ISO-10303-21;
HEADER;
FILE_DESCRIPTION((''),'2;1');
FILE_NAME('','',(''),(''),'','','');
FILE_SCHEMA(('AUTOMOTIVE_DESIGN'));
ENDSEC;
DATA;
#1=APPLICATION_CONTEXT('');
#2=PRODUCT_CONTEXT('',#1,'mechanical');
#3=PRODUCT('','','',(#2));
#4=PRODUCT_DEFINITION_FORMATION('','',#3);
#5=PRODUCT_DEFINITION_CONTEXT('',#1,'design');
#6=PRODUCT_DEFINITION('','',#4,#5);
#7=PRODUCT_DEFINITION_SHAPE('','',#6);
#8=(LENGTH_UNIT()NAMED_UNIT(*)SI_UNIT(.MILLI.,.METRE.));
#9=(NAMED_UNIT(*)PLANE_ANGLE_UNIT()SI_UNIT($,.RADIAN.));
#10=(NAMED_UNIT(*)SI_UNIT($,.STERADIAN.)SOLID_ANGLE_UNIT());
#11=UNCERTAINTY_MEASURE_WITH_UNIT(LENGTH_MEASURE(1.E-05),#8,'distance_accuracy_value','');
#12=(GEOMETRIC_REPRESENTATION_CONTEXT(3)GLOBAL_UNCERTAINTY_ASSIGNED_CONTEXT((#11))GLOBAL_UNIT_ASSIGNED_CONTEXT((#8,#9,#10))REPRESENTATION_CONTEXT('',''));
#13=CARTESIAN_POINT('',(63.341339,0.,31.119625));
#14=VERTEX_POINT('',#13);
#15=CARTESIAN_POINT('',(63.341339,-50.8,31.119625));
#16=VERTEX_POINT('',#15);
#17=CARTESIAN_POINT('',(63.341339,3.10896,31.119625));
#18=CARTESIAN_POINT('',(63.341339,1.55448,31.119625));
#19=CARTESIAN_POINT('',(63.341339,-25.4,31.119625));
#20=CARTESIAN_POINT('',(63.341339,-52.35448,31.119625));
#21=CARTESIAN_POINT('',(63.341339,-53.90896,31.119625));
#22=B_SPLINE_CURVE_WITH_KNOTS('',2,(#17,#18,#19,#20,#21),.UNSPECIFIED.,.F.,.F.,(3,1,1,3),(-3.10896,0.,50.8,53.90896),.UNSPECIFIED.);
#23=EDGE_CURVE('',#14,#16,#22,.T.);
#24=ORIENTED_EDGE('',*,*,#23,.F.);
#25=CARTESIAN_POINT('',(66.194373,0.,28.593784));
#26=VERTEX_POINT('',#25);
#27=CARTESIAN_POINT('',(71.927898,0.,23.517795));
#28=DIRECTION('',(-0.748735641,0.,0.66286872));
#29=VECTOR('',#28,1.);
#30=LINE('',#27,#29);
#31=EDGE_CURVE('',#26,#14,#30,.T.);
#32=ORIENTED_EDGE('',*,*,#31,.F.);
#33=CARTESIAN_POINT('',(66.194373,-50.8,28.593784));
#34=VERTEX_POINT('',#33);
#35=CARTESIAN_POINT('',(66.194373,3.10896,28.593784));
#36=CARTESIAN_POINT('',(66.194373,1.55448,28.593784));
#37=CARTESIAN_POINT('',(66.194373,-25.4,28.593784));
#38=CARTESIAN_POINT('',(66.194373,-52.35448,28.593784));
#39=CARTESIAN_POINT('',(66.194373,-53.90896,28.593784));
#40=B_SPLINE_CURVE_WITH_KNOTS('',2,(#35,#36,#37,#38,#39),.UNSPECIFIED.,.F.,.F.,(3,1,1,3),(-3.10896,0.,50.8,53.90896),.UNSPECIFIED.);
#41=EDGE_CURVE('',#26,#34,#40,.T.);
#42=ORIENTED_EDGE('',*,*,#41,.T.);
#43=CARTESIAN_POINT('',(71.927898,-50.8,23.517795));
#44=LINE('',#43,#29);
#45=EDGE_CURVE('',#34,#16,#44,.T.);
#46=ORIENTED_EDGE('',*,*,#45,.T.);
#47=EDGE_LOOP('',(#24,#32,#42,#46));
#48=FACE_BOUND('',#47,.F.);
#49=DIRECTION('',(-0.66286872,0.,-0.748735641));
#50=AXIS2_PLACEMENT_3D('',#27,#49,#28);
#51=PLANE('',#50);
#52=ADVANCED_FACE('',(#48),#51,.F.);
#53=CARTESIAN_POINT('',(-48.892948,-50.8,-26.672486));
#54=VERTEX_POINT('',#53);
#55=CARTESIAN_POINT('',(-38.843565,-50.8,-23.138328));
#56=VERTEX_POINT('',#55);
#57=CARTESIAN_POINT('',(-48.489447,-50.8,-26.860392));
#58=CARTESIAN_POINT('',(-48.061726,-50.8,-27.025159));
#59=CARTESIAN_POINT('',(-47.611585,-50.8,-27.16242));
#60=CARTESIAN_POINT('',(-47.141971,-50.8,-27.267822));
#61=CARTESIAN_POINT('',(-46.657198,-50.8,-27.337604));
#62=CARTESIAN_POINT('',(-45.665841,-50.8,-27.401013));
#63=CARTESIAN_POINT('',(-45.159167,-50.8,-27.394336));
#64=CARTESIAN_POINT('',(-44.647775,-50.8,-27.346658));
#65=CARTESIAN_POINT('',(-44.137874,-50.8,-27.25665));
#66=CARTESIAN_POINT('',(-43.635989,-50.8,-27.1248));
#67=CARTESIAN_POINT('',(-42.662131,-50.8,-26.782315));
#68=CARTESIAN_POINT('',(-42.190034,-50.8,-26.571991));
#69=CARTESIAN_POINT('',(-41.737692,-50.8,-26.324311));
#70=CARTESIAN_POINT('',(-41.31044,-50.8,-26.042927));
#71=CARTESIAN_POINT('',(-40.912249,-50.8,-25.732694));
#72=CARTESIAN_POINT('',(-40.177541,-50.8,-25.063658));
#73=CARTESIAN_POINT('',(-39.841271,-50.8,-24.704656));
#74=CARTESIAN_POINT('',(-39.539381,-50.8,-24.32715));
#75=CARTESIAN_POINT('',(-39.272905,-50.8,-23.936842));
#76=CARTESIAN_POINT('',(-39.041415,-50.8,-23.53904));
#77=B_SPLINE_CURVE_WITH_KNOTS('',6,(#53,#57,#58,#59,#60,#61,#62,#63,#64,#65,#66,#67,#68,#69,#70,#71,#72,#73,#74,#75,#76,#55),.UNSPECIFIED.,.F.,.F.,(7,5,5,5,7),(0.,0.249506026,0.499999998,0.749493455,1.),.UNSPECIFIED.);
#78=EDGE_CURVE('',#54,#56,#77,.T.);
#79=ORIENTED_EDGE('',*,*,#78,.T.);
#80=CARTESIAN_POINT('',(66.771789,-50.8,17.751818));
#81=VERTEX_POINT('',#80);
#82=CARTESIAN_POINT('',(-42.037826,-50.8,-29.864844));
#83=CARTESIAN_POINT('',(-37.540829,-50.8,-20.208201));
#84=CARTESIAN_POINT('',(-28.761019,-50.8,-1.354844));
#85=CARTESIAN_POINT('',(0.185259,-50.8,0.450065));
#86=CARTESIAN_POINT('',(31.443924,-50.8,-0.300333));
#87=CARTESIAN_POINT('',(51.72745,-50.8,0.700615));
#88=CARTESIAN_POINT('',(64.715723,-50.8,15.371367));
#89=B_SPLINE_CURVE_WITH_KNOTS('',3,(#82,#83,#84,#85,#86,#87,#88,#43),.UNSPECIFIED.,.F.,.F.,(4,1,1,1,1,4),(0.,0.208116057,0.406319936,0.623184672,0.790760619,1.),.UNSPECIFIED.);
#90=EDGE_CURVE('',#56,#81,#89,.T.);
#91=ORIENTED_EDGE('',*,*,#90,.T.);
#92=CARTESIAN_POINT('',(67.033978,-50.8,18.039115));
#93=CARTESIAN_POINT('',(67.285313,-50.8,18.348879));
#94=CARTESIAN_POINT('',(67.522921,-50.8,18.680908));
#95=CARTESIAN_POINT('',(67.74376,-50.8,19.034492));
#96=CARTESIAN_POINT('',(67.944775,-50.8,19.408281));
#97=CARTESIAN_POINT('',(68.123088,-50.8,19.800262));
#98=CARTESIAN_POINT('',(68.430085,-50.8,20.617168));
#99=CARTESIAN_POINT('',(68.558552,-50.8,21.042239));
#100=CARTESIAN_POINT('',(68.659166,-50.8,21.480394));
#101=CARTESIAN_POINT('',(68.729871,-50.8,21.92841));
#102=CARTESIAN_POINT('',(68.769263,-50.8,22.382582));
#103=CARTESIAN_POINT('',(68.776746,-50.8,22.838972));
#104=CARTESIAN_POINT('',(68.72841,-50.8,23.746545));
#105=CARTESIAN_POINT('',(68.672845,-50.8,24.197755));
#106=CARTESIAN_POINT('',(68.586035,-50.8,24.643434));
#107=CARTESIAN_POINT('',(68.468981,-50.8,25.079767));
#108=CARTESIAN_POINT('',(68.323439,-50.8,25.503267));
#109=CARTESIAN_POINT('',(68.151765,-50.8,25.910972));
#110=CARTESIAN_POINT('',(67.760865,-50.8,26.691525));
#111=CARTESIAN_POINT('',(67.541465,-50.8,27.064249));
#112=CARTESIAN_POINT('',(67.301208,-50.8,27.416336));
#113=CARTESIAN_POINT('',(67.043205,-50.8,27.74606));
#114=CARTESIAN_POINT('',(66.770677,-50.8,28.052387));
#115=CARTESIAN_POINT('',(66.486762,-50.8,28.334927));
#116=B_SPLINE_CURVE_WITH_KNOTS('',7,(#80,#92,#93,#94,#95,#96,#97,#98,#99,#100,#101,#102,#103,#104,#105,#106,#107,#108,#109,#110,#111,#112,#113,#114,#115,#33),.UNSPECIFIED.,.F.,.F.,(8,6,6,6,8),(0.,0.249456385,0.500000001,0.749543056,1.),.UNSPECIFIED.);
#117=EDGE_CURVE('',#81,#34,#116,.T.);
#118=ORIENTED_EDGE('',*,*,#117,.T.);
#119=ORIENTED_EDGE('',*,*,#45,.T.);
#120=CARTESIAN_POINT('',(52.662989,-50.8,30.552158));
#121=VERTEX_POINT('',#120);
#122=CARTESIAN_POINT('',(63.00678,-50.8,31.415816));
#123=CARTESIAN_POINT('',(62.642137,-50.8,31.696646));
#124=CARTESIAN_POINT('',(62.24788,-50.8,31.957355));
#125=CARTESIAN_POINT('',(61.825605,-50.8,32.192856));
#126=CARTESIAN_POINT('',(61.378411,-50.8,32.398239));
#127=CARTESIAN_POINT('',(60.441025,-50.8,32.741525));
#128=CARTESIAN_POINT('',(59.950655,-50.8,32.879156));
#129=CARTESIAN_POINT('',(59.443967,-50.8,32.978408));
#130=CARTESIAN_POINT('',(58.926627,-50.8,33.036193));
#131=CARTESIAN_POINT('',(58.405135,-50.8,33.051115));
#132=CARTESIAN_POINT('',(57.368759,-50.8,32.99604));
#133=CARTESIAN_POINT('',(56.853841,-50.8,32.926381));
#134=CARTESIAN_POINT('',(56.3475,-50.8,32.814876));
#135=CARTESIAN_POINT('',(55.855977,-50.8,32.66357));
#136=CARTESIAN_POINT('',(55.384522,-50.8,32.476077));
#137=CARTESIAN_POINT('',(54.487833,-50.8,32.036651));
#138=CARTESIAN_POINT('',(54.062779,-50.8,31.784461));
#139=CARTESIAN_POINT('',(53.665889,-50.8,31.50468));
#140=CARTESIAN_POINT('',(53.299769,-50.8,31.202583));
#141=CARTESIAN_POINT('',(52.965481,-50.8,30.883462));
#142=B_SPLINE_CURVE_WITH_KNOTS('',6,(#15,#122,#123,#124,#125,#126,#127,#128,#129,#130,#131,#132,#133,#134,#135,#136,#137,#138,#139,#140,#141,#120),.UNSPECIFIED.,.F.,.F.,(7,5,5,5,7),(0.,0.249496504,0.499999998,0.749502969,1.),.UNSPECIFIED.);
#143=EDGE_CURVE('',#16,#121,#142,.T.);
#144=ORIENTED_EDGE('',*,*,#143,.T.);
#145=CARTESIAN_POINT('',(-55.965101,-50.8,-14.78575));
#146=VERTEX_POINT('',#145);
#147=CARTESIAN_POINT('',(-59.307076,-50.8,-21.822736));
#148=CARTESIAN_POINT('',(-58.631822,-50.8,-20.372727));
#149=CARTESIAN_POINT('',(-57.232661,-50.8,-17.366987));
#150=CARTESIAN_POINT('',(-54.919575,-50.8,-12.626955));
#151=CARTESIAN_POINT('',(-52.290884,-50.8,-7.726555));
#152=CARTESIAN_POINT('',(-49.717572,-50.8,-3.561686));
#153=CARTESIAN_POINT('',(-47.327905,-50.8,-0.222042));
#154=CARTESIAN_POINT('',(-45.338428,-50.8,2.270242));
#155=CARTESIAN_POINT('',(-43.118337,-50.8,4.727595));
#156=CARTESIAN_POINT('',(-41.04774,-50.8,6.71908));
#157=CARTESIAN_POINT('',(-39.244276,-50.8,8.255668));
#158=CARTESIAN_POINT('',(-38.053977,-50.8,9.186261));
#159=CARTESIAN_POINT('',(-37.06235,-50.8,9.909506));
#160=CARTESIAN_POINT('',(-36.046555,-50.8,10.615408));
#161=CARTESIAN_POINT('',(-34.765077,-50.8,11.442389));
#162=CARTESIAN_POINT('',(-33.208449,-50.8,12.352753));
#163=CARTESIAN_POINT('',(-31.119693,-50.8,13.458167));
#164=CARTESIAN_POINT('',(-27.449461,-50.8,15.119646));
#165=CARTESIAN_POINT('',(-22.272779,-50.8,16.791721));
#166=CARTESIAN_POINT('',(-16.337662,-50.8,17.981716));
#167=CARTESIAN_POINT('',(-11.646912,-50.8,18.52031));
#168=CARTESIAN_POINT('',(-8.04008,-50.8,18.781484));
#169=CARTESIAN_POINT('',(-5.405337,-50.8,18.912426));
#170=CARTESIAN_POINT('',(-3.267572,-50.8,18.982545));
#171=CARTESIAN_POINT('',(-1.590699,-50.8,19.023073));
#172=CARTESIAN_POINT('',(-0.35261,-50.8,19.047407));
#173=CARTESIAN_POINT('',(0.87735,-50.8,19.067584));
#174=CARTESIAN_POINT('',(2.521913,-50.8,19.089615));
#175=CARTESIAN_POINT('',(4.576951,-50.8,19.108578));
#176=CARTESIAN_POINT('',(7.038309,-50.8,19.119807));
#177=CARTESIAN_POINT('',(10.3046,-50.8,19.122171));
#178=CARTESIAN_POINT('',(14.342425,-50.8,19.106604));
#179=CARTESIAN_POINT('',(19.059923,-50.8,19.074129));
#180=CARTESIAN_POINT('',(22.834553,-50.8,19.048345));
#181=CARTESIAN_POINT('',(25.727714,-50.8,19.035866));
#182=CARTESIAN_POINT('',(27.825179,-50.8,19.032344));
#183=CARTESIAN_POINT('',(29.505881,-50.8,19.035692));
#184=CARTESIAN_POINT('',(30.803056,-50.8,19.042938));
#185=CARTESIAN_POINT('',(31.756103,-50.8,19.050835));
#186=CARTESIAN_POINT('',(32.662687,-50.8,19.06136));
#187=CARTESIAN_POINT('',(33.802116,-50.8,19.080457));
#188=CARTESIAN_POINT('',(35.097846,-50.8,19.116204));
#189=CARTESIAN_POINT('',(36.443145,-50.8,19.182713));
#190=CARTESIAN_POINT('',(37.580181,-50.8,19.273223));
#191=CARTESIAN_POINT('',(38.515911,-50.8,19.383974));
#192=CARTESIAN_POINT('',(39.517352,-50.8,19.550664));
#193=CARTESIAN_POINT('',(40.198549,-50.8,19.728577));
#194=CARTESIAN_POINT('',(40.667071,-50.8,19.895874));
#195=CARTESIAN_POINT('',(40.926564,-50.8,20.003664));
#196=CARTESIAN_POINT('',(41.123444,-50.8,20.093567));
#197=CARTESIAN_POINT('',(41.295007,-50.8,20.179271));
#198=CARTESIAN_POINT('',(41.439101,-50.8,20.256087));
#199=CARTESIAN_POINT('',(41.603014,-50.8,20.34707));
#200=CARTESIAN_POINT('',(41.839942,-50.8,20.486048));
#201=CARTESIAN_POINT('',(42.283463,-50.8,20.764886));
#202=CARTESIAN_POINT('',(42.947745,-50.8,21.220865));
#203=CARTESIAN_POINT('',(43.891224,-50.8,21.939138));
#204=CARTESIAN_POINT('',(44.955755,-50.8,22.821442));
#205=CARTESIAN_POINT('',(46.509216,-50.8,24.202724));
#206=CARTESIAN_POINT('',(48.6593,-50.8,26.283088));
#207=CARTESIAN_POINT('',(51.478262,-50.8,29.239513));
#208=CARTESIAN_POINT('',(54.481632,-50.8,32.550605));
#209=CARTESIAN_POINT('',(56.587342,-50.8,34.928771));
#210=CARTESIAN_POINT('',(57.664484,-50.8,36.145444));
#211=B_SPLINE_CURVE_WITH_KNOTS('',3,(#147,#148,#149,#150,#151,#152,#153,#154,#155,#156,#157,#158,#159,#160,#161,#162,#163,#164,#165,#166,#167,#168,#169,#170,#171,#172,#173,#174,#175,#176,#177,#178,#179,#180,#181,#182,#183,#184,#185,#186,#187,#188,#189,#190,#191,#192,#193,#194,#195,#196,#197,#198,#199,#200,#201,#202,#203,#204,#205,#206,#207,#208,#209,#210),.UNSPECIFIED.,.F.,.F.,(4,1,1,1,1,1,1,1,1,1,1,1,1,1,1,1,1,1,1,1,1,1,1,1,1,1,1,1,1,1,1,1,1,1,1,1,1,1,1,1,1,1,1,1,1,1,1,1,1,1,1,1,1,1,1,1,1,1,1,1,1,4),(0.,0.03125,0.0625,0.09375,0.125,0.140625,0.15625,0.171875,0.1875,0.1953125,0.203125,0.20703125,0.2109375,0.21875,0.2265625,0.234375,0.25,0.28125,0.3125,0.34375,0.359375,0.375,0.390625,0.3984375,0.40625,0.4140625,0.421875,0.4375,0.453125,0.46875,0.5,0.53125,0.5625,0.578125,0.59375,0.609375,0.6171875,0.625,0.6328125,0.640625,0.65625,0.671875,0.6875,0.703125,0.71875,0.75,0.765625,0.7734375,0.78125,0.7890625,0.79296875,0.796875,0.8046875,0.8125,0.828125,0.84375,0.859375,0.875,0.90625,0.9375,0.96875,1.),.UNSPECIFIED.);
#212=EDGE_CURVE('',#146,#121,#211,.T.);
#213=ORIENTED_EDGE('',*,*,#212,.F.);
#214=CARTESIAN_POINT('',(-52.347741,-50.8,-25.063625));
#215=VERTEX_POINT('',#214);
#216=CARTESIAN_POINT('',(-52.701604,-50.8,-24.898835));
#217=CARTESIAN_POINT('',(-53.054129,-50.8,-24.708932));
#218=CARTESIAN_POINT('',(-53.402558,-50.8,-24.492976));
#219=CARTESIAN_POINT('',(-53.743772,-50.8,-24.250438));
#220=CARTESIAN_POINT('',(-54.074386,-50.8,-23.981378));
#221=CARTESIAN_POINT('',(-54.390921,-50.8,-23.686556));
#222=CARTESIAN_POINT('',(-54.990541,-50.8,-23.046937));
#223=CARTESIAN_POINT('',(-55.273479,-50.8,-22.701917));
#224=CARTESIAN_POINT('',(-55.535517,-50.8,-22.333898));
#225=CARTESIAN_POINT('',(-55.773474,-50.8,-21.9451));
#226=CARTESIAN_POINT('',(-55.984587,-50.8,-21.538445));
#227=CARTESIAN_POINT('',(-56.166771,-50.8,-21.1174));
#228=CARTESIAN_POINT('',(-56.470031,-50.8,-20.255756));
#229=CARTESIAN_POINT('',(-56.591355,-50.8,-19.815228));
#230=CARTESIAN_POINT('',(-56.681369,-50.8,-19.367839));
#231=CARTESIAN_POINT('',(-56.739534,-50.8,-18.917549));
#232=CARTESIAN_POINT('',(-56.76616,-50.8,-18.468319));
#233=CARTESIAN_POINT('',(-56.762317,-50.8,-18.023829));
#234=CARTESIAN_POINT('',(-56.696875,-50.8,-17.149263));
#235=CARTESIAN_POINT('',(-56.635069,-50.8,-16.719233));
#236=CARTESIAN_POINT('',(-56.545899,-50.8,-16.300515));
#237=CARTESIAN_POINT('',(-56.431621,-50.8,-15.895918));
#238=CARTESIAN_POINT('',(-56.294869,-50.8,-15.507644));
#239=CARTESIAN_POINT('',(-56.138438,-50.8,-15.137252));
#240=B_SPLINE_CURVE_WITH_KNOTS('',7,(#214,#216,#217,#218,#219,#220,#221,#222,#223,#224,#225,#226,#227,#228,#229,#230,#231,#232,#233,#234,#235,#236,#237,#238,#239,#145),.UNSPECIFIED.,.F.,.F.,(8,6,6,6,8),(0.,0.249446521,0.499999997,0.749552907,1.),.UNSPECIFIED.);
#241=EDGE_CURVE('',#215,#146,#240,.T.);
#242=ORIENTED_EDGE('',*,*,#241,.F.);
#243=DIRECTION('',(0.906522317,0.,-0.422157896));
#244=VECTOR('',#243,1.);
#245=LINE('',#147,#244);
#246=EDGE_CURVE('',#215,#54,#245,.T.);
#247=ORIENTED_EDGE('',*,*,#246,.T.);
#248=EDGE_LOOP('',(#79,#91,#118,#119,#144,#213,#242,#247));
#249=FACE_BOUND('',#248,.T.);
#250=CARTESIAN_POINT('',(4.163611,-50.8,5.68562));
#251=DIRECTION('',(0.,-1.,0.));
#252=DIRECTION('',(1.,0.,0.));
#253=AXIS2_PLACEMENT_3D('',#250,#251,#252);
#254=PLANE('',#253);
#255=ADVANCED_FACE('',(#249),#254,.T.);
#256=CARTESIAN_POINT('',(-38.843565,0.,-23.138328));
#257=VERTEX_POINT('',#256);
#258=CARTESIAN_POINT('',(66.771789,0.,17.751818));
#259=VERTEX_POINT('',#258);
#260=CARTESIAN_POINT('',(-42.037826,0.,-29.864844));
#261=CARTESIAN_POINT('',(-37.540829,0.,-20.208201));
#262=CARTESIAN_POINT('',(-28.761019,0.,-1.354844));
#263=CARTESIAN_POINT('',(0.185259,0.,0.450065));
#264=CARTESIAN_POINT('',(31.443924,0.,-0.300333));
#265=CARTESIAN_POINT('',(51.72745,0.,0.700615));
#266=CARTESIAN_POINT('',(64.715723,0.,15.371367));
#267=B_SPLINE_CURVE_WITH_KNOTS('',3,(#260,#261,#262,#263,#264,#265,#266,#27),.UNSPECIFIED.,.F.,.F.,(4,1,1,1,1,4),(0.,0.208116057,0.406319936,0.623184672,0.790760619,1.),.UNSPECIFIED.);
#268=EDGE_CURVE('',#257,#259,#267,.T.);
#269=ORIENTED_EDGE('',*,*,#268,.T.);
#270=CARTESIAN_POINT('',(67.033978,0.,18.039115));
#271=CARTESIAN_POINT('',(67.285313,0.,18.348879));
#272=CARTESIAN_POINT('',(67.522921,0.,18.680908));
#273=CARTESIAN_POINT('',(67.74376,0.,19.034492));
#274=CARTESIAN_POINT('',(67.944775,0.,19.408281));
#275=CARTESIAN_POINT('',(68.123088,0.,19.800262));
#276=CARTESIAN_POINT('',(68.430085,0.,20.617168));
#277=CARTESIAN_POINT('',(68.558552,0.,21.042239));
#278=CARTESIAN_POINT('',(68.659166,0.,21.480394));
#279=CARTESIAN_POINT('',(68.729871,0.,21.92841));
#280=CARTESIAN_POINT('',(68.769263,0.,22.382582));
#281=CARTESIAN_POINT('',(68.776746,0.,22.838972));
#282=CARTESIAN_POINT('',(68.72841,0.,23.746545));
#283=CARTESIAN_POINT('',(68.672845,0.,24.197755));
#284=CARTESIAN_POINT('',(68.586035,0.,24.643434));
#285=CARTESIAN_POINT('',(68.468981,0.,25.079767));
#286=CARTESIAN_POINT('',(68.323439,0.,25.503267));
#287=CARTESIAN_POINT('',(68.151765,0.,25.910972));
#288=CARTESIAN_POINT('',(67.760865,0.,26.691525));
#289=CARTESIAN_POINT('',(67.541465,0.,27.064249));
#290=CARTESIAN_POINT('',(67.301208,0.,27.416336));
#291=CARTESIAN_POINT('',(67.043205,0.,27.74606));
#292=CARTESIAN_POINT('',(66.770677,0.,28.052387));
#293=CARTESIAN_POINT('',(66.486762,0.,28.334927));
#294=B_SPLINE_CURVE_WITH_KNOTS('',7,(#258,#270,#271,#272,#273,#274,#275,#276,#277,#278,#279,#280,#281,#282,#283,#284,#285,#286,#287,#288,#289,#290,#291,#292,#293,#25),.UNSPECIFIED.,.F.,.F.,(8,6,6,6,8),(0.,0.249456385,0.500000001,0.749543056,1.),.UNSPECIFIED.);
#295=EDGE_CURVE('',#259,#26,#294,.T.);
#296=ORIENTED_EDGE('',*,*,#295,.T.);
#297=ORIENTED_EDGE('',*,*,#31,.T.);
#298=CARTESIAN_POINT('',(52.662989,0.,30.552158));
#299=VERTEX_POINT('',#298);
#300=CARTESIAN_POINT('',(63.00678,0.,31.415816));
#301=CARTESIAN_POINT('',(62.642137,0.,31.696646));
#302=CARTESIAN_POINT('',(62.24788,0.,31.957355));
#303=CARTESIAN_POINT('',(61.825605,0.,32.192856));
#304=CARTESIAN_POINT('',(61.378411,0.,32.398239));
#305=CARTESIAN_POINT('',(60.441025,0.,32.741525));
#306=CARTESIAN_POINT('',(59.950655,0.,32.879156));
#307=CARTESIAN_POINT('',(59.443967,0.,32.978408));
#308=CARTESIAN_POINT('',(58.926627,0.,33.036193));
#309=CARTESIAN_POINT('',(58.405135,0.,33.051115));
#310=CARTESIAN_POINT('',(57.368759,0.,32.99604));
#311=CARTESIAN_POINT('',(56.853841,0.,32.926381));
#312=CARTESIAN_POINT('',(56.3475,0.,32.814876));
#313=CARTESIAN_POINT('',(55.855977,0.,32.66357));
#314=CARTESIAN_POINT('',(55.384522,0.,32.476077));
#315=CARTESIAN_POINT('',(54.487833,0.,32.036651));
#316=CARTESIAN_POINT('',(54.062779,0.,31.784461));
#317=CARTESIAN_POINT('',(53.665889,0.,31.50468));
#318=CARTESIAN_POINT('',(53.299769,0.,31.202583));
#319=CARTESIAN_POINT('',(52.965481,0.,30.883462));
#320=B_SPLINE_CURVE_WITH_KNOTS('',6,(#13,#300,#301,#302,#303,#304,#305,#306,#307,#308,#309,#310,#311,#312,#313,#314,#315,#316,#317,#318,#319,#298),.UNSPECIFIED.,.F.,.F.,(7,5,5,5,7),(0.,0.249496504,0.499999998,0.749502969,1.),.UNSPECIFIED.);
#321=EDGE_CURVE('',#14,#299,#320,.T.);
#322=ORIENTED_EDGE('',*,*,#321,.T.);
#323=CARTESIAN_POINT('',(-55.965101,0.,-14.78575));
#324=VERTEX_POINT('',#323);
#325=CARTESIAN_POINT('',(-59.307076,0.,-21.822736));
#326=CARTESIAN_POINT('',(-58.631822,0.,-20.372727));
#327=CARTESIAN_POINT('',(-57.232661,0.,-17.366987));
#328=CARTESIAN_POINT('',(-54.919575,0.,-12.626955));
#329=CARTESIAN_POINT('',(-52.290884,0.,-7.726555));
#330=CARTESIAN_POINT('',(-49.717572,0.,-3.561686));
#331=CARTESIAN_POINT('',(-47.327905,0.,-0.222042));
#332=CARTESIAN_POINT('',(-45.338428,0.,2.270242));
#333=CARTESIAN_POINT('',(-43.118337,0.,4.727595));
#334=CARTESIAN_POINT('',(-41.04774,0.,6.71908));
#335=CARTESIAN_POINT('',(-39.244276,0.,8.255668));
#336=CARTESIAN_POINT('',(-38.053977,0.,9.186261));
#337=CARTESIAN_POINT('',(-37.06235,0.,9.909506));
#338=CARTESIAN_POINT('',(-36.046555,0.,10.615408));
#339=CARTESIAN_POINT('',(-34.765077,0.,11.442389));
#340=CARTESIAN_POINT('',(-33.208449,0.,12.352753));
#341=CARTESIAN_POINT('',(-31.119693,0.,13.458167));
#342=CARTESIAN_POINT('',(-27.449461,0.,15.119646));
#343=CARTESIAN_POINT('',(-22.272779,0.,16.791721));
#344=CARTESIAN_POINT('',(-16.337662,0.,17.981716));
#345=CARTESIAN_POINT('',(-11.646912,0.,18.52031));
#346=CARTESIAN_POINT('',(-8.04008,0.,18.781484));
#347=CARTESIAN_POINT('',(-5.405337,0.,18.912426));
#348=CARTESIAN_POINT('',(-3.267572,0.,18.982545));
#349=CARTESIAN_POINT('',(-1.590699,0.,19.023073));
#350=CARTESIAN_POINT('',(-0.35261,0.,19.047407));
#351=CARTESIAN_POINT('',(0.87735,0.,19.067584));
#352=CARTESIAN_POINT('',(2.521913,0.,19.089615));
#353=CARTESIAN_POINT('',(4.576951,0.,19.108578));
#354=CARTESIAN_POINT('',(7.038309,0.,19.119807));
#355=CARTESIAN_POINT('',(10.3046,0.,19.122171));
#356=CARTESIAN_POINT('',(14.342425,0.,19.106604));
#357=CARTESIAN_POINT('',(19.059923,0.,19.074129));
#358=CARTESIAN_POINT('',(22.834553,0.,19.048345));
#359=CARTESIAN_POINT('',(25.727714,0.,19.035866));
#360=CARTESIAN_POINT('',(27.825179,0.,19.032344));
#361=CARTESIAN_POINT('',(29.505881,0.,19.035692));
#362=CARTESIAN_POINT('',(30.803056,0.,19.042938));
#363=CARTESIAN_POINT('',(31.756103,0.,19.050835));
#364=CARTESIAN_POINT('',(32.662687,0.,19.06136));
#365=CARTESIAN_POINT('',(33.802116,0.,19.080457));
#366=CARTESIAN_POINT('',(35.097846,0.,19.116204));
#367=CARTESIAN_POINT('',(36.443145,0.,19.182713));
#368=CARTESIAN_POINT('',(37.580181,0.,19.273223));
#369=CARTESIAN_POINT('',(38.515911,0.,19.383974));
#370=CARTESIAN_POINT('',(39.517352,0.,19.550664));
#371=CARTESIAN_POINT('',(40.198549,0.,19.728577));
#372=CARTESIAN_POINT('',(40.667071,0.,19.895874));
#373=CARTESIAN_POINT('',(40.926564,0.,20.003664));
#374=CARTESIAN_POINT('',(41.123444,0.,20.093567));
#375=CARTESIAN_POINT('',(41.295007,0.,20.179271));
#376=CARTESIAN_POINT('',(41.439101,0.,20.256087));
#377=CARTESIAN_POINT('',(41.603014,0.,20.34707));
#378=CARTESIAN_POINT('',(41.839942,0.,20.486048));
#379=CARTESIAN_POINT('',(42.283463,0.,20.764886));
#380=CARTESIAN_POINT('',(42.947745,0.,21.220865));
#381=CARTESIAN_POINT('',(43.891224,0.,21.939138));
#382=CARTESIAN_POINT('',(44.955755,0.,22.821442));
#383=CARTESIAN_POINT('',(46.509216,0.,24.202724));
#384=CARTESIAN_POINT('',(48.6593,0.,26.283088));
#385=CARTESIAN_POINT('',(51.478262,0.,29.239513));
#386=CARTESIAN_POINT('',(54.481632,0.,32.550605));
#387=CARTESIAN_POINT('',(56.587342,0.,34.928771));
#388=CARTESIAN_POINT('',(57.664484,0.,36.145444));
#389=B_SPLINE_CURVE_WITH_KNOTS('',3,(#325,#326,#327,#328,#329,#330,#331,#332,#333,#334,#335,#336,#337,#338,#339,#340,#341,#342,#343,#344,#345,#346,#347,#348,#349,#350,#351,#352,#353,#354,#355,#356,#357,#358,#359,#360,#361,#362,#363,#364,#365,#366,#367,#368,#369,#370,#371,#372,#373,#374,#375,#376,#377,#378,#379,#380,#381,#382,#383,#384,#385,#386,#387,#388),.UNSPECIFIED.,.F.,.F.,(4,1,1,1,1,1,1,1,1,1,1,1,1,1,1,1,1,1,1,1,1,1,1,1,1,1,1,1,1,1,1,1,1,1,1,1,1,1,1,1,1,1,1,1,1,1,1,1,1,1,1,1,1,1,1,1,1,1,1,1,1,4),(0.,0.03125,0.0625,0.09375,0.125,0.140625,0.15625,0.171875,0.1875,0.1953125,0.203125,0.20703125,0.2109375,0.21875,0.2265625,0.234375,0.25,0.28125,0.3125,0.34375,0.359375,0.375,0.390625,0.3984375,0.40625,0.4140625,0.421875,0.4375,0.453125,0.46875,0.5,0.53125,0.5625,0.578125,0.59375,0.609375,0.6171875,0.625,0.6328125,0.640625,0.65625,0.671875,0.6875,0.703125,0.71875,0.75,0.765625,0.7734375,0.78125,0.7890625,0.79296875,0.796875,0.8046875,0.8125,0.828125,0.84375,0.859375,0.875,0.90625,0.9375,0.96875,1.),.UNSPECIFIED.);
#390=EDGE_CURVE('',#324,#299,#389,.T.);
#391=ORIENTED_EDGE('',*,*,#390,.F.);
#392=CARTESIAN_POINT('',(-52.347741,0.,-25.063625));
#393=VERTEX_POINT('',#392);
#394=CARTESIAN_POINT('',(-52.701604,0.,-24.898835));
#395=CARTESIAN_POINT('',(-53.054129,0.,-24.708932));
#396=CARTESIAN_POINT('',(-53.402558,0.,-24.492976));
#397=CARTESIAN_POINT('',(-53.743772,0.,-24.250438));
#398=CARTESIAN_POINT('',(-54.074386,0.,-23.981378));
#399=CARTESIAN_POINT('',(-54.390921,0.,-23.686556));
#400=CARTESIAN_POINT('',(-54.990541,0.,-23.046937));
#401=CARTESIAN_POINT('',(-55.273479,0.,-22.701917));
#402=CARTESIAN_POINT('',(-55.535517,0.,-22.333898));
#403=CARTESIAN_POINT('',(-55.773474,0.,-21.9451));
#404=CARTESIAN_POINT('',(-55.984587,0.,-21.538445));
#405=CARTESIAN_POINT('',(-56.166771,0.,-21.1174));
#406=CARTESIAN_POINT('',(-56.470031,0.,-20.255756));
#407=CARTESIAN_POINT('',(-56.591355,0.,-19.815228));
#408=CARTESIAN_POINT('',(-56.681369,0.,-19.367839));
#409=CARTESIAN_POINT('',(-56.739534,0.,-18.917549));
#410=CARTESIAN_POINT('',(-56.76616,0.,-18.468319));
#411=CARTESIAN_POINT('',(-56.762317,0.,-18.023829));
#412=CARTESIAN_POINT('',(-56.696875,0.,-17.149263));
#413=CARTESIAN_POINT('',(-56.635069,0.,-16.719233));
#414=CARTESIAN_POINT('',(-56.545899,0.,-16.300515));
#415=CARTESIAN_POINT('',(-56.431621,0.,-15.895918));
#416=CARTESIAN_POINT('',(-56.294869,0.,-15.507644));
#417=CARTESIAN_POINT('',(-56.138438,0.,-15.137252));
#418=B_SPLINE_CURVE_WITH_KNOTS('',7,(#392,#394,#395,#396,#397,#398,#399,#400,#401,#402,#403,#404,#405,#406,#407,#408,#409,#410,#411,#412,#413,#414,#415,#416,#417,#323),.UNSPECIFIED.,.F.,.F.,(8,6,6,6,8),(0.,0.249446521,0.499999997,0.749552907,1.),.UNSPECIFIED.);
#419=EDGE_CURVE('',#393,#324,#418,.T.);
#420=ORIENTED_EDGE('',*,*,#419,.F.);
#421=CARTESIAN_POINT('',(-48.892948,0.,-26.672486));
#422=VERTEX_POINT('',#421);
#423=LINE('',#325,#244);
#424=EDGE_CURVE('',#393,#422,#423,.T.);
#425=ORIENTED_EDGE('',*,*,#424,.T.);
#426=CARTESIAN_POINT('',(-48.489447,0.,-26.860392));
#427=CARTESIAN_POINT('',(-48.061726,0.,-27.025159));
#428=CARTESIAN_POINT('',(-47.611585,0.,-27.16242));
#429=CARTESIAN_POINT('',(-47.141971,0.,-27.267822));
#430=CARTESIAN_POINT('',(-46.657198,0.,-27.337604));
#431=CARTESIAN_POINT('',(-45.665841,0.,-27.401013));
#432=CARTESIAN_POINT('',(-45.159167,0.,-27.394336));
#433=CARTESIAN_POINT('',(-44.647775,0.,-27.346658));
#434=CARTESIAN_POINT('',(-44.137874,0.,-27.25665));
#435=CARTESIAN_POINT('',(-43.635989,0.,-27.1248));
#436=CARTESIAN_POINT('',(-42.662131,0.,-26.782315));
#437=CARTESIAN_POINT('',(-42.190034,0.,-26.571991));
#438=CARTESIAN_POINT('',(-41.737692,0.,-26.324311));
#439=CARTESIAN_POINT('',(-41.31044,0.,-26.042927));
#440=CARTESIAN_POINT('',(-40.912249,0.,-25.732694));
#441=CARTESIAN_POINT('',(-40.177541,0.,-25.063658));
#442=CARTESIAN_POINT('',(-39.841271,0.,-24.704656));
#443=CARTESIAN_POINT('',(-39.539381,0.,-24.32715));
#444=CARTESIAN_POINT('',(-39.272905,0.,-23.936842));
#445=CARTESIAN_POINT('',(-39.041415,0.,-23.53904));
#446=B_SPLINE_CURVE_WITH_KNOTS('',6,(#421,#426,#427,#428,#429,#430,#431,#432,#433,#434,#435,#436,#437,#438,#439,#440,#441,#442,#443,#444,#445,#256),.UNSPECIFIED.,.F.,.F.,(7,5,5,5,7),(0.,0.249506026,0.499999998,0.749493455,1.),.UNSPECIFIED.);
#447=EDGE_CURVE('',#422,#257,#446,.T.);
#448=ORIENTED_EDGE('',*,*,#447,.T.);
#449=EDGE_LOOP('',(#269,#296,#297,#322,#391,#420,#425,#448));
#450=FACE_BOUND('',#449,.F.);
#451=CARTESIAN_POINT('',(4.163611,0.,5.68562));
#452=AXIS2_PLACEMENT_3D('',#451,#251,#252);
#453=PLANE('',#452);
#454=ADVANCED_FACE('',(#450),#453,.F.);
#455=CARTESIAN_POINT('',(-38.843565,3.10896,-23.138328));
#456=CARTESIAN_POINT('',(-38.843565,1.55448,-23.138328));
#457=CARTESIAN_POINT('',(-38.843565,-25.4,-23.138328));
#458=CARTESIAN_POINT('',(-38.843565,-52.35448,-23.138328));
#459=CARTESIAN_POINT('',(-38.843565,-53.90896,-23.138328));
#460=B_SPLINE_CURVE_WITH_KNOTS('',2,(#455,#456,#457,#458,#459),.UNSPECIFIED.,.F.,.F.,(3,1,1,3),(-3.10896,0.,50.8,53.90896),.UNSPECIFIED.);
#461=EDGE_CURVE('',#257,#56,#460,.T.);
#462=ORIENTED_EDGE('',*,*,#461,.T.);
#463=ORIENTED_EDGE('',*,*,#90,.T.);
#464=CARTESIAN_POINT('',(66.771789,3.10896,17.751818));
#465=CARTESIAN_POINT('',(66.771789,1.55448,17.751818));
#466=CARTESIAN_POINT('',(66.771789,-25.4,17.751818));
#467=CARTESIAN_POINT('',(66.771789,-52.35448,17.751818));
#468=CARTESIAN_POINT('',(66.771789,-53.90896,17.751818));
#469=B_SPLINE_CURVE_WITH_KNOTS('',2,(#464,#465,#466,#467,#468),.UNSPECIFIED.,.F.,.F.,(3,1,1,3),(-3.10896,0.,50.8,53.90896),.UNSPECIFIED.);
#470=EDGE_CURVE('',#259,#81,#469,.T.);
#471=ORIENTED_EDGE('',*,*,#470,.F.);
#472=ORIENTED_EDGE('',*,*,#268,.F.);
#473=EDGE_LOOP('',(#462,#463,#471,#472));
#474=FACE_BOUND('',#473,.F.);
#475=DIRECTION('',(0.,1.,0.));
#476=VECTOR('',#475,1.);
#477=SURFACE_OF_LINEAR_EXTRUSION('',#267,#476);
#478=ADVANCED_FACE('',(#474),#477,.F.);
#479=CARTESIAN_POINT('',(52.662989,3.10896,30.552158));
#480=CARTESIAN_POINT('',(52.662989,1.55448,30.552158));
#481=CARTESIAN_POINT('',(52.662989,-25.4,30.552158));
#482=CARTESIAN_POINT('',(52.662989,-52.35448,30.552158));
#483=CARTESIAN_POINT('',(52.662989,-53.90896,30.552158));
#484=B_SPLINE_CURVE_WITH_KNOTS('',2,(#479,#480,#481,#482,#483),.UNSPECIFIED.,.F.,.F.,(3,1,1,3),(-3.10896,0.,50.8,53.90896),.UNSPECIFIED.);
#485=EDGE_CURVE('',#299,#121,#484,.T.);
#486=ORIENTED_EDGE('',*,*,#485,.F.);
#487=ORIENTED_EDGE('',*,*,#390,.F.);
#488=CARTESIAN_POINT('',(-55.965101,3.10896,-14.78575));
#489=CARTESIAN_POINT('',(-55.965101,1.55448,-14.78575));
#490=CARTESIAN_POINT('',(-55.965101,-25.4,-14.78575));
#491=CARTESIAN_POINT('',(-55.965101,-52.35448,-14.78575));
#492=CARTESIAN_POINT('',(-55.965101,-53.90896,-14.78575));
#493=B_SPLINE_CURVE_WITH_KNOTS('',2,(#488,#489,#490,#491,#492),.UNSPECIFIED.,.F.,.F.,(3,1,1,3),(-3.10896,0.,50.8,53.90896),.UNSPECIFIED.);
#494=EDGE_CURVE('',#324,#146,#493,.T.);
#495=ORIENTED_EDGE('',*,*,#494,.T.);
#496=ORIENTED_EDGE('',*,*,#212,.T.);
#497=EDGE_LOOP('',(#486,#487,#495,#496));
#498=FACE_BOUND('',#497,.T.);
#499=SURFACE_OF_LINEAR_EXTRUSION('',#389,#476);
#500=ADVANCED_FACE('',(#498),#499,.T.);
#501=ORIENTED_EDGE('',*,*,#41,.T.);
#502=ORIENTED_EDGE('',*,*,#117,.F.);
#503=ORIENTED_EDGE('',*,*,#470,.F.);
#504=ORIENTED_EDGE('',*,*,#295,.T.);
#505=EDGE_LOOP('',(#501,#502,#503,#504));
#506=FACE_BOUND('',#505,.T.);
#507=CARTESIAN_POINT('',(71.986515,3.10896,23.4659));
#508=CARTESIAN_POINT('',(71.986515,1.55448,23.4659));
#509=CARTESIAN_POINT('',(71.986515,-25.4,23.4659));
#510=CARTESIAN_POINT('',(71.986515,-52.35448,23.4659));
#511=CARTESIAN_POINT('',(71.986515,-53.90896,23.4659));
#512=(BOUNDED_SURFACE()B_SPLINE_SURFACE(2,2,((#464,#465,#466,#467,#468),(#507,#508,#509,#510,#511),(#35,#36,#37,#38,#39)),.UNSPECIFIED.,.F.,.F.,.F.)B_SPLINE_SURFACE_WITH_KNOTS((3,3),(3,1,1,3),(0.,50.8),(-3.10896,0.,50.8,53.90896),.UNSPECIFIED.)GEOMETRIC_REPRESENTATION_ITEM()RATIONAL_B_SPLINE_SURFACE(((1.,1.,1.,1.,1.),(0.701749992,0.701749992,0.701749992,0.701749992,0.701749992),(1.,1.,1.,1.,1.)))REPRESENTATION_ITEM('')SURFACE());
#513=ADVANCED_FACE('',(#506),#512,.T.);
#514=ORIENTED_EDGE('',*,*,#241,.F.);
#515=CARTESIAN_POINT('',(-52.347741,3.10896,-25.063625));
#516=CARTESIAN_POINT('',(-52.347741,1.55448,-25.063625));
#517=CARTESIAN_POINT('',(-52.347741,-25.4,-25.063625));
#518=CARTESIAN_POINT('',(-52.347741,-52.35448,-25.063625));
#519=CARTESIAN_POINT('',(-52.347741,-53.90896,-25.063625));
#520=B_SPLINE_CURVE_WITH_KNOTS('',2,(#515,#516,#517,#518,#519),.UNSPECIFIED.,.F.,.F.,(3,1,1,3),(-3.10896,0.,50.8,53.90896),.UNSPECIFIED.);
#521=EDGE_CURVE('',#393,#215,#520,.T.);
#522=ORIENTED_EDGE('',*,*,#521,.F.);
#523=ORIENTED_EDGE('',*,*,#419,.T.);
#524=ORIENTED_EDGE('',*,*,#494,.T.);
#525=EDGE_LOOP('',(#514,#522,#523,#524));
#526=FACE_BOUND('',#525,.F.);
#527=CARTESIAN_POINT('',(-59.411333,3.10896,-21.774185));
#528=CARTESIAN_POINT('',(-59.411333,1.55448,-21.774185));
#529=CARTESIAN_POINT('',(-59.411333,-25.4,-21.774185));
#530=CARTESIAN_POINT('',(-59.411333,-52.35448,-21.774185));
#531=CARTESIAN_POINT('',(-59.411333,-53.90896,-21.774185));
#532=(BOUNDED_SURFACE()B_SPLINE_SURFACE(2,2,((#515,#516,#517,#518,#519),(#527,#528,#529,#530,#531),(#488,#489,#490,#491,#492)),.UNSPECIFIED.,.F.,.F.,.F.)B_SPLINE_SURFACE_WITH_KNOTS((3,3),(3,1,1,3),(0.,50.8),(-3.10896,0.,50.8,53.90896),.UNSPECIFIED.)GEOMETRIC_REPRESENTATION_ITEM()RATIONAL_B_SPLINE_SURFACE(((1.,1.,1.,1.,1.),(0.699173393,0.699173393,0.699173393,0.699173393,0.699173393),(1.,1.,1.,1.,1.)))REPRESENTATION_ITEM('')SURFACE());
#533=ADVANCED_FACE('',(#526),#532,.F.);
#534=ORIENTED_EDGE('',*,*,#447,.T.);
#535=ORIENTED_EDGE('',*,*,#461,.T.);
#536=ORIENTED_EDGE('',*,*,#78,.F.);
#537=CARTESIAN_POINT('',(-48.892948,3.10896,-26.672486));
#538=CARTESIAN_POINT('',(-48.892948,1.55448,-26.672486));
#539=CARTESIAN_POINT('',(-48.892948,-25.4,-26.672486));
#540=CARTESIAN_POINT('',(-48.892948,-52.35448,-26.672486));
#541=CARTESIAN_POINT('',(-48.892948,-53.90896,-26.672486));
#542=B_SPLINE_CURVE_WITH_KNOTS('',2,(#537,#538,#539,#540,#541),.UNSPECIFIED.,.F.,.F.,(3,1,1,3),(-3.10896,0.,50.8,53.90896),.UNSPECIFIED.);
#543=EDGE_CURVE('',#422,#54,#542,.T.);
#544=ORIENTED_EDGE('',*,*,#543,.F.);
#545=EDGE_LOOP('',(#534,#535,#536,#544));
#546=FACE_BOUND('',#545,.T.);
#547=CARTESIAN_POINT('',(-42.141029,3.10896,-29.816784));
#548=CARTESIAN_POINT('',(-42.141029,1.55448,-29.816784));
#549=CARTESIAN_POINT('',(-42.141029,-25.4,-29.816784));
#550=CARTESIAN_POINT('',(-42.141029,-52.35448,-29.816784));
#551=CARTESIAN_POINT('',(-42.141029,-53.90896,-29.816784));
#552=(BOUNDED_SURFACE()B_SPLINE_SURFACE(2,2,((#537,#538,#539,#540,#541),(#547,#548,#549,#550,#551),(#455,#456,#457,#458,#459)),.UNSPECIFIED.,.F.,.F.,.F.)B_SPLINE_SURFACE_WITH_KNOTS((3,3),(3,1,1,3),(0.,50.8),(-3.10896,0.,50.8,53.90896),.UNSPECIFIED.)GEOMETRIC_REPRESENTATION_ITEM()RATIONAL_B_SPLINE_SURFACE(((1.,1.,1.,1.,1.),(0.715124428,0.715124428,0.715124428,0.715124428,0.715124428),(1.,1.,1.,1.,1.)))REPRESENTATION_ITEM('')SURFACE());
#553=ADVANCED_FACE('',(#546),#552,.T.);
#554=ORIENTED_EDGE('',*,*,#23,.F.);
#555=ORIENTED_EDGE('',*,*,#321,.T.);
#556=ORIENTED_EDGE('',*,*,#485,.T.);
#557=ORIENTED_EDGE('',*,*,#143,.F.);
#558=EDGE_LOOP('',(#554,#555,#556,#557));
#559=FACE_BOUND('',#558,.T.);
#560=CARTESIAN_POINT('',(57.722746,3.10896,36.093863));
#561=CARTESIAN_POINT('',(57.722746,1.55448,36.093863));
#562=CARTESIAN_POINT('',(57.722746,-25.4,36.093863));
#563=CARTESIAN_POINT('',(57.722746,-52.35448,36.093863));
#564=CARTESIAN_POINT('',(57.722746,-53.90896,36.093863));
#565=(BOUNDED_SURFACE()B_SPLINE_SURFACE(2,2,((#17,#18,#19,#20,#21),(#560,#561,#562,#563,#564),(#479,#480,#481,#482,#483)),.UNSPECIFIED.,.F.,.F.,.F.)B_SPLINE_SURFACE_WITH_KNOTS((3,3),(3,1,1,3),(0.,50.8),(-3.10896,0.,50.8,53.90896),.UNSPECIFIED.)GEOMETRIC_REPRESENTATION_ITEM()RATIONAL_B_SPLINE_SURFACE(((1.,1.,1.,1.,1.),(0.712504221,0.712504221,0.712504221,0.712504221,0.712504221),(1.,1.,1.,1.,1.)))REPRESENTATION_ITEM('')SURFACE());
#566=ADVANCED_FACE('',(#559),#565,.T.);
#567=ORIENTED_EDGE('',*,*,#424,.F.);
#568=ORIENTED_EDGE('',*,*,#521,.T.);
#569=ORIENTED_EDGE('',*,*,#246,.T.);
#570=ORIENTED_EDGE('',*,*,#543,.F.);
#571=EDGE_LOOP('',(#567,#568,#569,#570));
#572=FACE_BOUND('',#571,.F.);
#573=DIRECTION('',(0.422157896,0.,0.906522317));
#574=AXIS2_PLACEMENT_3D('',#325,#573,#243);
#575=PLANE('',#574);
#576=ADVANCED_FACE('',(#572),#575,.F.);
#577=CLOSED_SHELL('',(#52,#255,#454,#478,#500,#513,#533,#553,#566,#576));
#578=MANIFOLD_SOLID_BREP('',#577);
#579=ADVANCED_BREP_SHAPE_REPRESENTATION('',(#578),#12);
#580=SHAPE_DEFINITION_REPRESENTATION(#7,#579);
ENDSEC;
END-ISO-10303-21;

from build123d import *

# Parameters (mm, degrees)
F1_DEPTH = 50.8
F2_R     = 7.62


# Not quite as in the source:
# - the dataset's text gives a spline's control points without its knots; the knots are read off the source's solid


with BuildPart() as f1:
    # F0 (on Front) → F1 (new body)
    with BuildSketch(Plane.XZ):
        with BuildLine():
            Line((-59.3070761655, -21.8227360142), (-42.0378260314, -29.8648439348))
            add(Edge.make_bspline(
                [(-42.0378260314, -29.8648439348), (-37.5408292143, -20.2082012168), (-28.7610191004, -1.3548435544), (0.1852591164, 0.4500649959), (31.4439243402, -0.3003332078), (51.7274502596, 0.7006149211), (64.7157226613, 15.3713666937), (71.9278976321, 23.5177949071)],
                knots=[0, 0, 0, 0, 0.2081160567, 0.4063199361, 0.6231846725, 0.7907606193, 1, 1, 1, 1], degree=3))
            Line((71.9278976321, 23.5177949071), (57.66448368, 36.1454440324))
            add(Edge.make_bspline(
                [(-59.3070761655, -21.8227360142), (-58.631822402, -20.372727352), (-57.2326609344, -17.3669870215), (-54.9195750463, -12.6269553993), (-52.290883787, -7.7265549055), (-49.7175719467, -3.561686059), (-47.3279051008, -0.2220423536), (-45.338427998, 2.2702424421), (-43.1183370493, 4.7275950198), (-41.0477397791, 6.7190800232), (-39.2442762759, 8.2556682686), (-38.0539774048, 9.1862612918), (-37.0623497299, 9.9095055954), (-36.0465553439, 10.6154075646), (-34.7650769471, 11.4423890704), (-33.2084485385, 12.3527532604), (-31.1196933377, 13.458167234), (-27.4494612164, 15.1196460437), (-22.2727789213, 16.7917213418), (-16.3376615725, 17.9817161001), (-11.6469124365, 18.5203096146), (-8.0400800968, 18.7814841119), (-5.4053373413, 18.9124255501), (-3.2675723307, 18.982544513), (-1.5906986648, 19.0230733609), (-0.3526104933, 19.0474071732), (0.87734965, 19.0675835008), (2.5219132672, 19.0896147925), (4.5769506756, 19.1085778208), (7.0383090768, 19.1198065178), (10.3046004987, 19.1221708173), (14.3424252523, 19.1066043772), (19.0599234, 19.0741289863), (22.8345528238, 19.0483452659), (25.7277137641, 19.0358659389), (27.8251785593, 19.0323438017), (29.5058814233, 19.035692451), (30.8030558592, 19.0429376699), (31.7561028254, 19.0508346878), (32.6626871735, 19.0613596046), (33.8021161008, 19.0804572118), (35.0978461461, 19.1162037558), (36.4431452359, 19.1827126493), (37.5801812791, 19.2732225909), (38.515911426, 19.3839735558), (39.5173517276, 19.5506644088), (40.1985488805, 19.7285768595), (40.6670707589, 19.8958738921), (40.9265642367, 20.0036637108), (41.1234439392, 20.0935670417), (41.2950071187, 20.1792714123), (41.439100667, 20.2560871994), (41.603013776, 20.3470701295), (41.8399423013, 20.4860480773), (42.2834626322, 20.7648864981), (42.9477447613, 21.2208645946), (43.8912236782, 21.9391381184), (44.9557550555, 22.8214415778), (46.5092157464, 24.2027241023), (48.6592995414, 26.2830875471), (51.4782616603, 29.2395128834), (54.4816322492, 32.550604721), (56.5873419532, 34.9287711439), (57.66448368, 36.1454440324)],
                knots=[0, 0, 0, 0, 0.03125, 0.0625, 0.09375, 0.125, 0.140625, 0.15625, 0.171875, 0.1875, 0.1953125, 0.203125, 0.20703125, 0.2109375, 0.21875, 0.2265625, 0.234375, 0.25, 0.28125, 0.3125, 0.34375, 0.359375, 0.375, 0.390625, 0.3984375, 0.40625, 0.4140625, 0.421875, 0.4375, 0.453125, 0.46875, 0.5, 0.53125, 0.5625, 0.578125, 0.59375, 0.609375, 0.6171875, 0.625, 0.6328125, 0.640625, 0.65625, 0.671875, 0.6875, 0.703125, 0.71875, 0.75, 0.765625, 0.7734375, 0.78125, 0.7890625, 0.79296875, 0.796875, 0.8046875, 0.8125, 0.828125, 0.84375, 0.859375, 0.875, 0.90625, 0.9375, 0.96875, 1, 1, 1, 1], degree=3))
        make_face()
    extrude(amount=F1_DEPTH)

    # F2
    f2_edges = [f1.edges().sort_by_distance(p)[0] for p in [
        (57.664484, -25.4, 36.145444),
        (71.927898, -25.4, 23.517795),
        (-59.307076, -25.4, -21.822736),
        (-42.037826, -25.4, -29.864844),
    ]]
    fillet(f2_edges, radius=F2_R)


solid = f1.part
